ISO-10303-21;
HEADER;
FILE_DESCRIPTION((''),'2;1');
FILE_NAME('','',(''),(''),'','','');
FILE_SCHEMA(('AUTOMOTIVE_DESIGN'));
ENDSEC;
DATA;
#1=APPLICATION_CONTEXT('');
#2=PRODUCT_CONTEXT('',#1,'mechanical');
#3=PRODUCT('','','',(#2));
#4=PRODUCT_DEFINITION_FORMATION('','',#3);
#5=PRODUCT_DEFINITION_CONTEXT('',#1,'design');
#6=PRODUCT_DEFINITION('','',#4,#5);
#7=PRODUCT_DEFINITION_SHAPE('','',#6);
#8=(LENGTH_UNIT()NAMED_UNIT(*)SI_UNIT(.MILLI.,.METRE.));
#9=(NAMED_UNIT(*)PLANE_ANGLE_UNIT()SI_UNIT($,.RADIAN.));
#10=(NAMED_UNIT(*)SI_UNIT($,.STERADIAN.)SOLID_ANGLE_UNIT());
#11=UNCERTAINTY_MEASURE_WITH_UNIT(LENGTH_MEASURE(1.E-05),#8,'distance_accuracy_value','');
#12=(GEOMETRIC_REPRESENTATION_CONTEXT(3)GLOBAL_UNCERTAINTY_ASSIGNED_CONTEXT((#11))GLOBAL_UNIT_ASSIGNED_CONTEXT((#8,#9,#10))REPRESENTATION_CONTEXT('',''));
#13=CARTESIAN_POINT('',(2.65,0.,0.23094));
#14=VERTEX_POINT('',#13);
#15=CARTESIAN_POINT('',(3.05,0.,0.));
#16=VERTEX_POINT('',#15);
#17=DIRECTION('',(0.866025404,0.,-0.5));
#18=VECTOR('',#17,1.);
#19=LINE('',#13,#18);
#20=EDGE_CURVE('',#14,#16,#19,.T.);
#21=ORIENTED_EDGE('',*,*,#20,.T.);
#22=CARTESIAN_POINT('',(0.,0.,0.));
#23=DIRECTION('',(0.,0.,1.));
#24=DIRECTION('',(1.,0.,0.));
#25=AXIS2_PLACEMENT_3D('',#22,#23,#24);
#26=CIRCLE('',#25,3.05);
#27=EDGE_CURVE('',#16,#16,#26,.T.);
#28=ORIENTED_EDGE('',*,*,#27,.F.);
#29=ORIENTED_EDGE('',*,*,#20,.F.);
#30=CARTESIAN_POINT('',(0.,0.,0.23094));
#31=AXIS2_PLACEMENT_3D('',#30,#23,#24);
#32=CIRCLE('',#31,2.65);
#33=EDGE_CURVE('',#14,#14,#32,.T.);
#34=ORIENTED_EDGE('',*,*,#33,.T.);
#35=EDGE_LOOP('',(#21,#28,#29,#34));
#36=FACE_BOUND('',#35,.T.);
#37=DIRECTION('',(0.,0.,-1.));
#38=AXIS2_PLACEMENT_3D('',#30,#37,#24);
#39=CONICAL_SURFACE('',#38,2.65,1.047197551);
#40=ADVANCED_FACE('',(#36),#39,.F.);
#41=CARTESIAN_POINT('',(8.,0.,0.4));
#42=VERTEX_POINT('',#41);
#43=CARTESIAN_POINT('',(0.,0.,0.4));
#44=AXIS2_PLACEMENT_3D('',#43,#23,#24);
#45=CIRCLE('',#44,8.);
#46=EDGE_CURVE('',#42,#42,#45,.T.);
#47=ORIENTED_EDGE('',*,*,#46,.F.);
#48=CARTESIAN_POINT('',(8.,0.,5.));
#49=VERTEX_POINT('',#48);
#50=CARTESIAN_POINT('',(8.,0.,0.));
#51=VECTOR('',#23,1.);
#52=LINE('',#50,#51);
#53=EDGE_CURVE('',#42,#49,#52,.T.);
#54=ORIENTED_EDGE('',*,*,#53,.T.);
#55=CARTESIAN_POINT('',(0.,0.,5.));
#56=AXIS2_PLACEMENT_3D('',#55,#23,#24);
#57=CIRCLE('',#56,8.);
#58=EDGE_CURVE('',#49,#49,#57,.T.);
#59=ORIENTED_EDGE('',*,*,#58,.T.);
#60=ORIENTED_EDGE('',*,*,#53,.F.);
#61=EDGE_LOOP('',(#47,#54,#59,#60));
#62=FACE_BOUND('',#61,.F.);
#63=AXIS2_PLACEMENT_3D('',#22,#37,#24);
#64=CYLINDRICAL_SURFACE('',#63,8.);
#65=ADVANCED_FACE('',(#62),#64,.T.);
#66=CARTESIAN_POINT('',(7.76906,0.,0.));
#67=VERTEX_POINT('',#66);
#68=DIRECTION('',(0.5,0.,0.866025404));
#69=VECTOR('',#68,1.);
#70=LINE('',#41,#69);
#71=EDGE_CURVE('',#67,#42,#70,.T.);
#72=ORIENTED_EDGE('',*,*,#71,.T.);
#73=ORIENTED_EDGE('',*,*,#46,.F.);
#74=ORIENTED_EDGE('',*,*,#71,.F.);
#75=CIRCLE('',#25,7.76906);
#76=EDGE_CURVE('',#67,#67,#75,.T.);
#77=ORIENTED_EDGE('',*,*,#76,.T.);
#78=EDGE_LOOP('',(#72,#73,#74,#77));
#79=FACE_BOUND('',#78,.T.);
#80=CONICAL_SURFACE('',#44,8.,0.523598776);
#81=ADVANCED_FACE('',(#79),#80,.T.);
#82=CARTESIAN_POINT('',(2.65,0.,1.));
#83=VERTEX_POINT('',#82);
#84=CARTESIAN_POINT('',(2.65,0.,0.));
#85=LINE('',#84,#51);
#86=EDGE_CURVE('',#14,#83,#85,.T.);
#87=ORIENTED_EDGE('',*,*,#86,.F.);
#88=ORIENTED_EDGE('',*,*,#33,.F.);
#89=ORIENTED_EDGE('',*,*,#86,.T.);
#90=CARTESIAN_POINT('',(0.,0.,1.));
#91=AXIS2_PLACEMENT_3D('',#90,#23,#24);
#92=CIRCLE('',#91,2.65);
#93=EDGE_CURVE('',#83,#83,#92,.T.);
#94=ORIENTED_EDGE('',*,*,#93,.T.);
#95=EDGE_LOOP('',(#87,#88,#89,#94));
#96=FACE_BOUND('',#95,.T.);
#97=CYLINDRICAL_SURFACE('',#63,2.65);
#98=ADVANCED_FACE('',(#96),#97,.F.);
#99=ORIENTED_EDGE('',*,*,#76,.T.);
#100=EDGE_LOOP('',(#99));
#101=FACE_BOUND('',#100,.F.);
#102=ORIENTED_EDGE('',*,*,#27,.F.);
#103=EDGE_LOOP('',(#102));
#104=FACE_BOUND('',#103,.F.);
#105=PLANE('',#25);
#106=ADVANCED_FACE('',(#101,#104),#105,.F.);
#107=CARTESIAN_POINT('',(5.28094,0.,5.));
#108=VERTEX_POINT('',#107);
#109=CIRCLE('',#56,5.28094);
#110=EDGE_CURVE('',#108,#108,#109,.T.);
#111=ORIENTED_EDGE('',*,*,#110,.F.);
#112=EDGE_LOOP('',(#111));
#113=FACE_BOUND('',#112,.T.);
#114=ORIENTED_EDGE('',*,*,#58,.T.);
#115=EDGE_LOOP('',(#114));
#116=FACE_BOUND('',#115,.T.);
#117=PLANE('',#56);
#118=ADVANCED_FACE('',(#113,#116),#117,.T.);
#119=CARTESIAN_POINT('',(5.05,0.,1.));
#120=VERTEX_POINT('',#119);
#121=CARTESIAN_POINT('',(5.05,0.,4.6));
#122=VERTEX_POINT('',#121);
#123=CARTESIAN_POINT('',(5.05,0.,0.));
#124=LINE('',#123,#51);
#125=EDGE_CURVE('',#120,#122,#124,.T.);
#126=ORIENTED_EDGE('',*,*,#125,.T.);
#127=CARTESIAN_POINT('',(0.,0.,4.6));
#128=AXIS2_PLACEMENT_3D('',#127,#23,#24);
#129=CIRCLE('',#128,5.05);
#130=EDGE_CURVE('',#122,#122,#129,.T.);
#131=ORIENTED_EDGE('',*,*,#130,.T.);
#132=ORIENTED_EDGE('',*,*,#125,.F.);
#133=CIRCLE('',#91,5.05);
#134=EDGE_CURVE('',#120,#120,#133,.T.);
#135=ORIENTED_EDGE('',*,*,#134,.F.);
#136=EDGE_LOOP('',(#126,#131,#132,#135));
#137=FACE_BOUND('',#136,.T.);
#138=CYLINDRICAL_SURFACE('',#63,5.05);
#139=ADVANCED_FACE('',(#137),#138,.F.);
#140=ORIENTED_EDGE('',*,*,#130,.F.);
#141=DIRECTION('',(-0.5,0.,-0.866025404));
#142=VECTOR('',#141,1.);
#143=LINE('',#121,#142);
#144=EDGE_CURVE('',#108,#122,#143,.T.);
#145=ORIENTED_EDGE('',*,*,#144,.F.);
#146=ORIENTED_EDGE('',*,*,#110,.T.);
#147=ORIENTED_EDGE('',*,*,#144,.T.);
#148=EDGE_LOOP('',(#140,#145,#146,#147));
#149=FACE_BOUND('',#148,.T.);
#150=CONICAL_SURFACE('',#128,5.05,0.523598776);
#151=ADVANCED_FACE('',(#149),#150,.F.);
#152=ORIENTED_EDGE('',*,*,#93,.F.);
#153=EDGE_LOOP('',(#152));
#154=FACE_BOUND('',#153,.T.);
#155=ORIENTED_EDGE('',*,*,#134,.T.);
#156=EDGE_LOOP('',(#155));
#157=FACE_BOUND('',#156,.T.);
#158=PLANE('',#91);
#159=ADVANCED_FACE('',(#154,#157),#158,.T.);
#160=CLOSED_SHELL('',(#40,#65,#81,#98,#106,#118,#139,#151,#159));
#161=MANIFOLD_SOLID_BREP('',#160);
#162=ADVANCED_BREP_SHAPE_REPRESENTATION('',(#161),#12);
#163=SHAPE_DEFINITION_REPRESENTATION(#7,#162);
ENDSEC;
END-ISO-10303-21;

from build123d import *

# Parameters (mm, degrees)
F0_R        = 5.05
F0_R_2      = 2.65
F1_DEPTH    = 1
F0_R_3      = 8
F2_DEPTH    = 5
F3_C1_SIZE2 = 0.4
F3_C1_SIZE  = 0.2309401077
F3_C2_SIZE2 = 0.4
F3_C2_SIZE  = 0.2309401077
F3_C3_SIZE2 = 0.4
F3_C3_SIZE  = 0.2309401077


with BuildPart() as f1:
    # F0 (on Top) → F1 (new body)
    with BuildSketch(Plane.XY):
        Circle(F0_R)
        Circle(F0_R_2, mode=Mode.SUBTRACT)
    extrude(amount=F1_DEPTH)

    # F0 (on Top) → F2 (join)
    with BuildSketch(Plane.XY):
        Circle(F0_R_3)
        Circle(F0_R, mode=Mode.SUBTRACT)
    extrude(amount=F2_DEPTH)

    # F3: chamfer of 0.4 x 0.2309401077 on 3 edges, made by hand

    # F3_c1
    f3_c1_edges = [f1.edges().sort_by_distance(p)[0] for p in [
        (-2.65, 0, 0),
    ]]
    f3_c1_side = f1.faces().sort_by_distance((-2.65, 0, 0.0046188022))[0]
    chamfer(f3_c1_edges, length=F3_C1_SIZE, length2=F3_C1_SIZE2, reference=f3_c1_side)

    # F3_c2
    f3_c2_edges = [f1.edges().sort_by_distance(p)[0] for p in [
        (-8, 0, 0),
    ]]
    f3_c2_side = f1.faces().sort_by_distance((-7.9953811978, 0, 0))[0]
    chamfer(f3_c2_edges, length=F3_C2_SIZE, length2=F3_C2_SIZE2, reference=f3_c2_side)

    # F3_c3
    f3_c3_edges = [f1.edges().sort_by_distance(p)[0] for p in [
        (-5.05, 0, 5),
    ]]
    f3_c3_side = f1.faces().sort_by_distance((-5.0546188022, 0, 5))[0]
    chamfer(f3_c3_edges, length=F3_C3_SIZE, length2=F3_C3_SIZE2, reference=f3_c3_side)


solid = f1.part
